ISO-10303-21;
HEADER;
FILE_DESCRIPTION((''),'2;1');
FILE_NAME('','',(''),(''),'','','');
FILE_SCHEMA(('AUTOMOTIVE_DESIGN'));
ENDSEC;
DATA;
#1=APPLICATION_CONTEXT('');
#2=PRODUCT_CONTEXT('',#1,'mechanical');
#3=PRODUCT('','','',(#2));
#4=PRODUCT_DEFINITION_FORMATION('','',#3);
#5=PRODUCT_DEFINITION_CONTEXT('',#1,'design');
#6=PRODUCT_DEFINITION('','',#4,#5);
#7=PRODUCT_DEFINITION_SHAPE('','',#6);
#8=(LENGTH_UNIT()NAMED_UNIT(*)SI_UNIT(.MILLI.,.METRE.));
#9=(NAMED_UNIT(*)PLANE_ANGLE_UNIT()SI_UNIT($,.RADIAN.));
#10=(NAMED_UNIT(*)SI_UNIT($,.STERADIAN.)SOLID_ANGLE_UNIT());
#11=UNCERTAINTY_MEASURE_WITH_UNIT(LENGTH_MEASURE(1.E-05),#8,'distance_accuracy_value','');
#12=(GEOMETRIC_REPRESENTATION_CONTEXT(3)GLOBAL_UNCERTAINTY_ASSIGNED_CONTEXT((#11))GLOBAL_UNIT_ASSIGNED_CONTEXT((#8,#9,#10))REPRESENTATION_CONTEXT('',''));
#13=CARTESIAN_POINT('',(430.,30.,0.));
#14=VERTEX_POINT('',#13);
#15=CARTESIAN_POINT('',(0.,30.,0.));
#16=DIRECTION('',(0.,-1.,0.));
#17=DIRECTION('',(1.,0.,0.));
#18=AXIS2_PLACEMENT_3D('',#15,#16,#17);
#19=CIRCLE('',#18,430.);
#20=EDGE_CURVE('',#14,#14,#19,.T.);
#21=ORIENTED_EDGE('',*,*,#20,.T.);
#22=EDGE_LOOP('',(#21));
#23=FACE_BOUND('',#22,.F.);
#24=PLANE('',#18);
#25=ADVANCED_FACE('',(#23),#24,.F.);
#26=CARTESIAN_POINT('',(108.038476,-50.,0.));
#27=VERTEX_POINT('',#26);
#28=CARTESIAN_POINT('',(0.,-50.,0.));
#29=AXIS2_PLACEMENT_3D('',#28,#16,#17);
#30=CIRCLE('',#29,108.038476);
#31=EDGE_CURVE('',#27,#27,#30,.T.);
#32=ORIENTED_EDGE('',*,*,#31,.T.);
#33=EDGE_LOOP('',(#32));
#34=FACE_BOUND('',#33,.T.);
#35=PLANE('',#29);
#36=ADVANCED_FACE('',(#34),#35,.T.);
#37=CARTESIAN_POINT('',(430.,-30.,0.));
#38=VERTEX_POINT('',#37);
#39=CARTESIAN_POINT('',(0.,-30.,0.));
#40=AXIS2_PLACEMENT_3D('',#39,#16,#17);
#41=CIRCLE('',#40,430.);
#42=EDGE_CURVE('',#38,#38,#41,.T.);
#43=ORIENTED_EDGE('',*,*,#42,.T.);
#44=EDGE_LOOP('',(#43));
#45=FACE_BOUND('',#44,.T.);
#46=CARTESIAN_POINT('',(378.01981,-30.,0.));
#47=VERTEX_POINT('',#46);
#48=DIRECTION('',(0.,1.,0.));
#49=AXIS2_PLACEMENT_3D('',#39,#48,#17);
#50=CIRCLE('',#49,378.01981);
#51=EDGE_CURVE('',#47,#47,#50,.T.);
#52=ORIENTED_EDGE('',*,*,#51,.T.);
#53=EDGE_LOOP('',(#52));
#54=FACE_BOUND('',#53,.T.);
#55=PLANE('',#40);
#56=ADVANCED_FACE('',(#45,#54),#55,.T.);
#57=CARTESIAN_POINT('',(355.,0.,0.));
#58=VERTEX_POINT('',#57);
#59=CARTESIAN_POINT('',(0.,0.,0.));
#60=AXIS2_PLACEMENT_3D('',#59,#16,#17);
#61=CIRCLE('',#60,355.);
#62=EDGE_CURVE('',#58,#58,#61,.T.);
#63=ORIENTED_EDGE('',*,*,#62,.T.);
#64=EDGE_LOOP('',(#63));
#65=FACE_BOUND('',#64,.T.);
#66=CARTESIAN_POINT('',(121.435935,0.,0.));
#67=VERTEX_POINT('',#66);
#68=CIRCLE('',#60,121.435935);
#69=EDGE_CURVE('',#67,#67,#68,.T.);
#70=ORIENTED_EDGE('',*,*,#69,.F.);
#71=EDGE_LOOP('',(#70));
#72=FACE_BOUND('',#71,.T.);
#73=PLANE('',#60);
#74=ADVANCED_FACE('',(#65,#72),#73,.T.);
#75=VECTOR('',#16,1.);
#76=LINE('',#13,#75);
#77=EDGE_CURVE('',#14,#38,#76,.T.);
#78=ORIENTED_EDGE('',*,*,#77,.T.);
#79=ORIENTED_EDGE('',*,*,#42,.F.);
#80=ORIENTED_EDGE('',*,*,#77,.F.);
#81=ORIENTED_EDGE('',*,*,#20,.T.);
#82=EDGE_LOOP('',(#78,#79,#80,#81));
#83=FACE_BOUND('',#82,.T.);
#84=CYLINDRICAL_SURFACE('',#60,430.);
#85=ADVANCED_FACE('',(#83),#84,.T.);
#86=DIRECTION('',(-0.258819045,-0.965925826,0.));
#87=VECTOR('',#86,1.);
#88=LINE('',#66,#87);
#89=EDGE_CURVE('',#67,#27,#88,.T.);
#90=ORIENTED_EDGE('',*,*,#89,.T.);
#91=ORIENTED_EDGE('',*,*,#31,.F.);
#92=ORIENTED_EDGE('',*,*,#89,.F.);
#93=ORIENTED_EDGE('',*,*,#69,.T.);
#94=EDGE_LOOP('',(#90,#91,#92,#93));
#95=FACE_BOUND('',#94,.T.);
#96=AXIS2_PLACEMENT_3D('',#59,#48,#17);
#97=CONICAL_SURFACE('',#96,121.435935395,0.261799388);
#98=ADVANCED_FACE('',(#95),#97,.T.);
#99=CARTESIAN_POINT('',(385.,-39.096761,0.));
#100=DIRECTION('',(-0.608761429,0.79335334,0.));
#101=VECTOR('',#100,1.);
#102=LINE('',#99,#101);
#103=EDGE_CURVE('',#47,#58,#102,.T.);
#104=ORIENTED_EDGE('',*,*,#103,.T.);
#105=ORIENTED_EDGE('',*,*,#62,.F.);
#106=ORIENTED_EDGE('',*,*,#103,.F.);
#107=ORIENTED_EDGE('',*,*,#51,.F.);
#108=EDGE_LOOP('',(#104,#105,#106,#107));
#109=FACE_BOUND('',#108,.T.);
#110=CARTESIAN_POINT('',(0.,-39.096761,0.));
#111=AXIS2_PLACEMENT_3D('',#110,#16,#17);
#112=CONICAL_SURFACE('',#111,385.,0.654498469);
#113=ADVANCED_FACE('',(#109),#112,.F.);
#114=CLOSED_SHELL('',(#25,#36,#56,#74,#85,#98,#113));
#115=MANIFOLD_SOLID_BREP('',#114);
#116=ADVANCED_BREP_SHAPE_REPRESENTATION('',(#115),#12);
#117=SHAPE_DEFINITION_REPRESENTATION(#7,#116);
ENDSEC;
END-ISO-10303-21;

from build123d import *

# Parameters (mm, degrees)
F0_R     = 430
F1_DEPTH = 30
F2_R     = 385
F2_R_2   = 100
F3_DEPTH = 30
F4_DEPTH = 20


# Not quite as in the source:
# - a fillet or chamfer that OpenCascade refuses, or shapes differently, is made with other operations: its cross-section is extruded or revolved along the edge and cut away or added


with BuildPart() as f1:
    # F0 (on Front) → F1 (new body, symmetric)
    with BuildSketch(Plane.XZ):
        Circle(F0_R)
    extrude(amount=F1_DEPTH, both=True)

    # F2 (on face) → F3 (cut)
    with BuildSketch(Plane.XZ.offset(30)):
        Circle(F2_R)
        Circle(F2_R_2, mode=Mode.SUBTRACT)
    extrude(amount=-F3_DEPTH, mode=Mode.SUBTRACT)

    # F4 (add): a face of the model
    f4_faces = [f1.faces().sort_by_distance(p)[0] for p in [
        (0, -30, 0),
    ]]
    extrude(f4_faces, amount=F4_DEPTH)

    # F5: chamfer of 80 x 21.4359353945 on 1 edges, made by hand


with BuildPart() as f5_tool2:
    # F5_s3 → F5_t4 (revolve)
    with BuildSketch(Plane.XY):
        Polygon((121.4359353945, 0), (100, -80), (100, 0), align=None)
    revolve(axis=Axis((0, 0, 0), (0, -1, 0)))

    split(bisect_by=Plane.XZ.offset(50), keep=Keep.BOTTOM)


with BuildPart() as f1_1:
    add(f1.part)

    # F5_t1: union F5_tool2
    add(f5_tool2.part)

    # F6: chamfer of 30 x 39.0967611852 on 1 edges, made by hand


with BuildPart() as f6_tool2:
    # F6_s3 → F6_t4 (revolve)
    with BuildSketch(Plane.XY):
        Polygon((385, -39.0967611852), (355, 0), (385, 0), align=None)
    revolve(axis=Axis((0, 0, 0), (0, -1, 0)))

    split(bisect_by=Plane.XZ.offset(30), keep=Keep.BOTTOM)


with BuildPart() as f1_2:
    add(f1_1.part)

    # F6_t1: union F6_tool2
    add(f6_tool2.part)


solid = f1_2.part
